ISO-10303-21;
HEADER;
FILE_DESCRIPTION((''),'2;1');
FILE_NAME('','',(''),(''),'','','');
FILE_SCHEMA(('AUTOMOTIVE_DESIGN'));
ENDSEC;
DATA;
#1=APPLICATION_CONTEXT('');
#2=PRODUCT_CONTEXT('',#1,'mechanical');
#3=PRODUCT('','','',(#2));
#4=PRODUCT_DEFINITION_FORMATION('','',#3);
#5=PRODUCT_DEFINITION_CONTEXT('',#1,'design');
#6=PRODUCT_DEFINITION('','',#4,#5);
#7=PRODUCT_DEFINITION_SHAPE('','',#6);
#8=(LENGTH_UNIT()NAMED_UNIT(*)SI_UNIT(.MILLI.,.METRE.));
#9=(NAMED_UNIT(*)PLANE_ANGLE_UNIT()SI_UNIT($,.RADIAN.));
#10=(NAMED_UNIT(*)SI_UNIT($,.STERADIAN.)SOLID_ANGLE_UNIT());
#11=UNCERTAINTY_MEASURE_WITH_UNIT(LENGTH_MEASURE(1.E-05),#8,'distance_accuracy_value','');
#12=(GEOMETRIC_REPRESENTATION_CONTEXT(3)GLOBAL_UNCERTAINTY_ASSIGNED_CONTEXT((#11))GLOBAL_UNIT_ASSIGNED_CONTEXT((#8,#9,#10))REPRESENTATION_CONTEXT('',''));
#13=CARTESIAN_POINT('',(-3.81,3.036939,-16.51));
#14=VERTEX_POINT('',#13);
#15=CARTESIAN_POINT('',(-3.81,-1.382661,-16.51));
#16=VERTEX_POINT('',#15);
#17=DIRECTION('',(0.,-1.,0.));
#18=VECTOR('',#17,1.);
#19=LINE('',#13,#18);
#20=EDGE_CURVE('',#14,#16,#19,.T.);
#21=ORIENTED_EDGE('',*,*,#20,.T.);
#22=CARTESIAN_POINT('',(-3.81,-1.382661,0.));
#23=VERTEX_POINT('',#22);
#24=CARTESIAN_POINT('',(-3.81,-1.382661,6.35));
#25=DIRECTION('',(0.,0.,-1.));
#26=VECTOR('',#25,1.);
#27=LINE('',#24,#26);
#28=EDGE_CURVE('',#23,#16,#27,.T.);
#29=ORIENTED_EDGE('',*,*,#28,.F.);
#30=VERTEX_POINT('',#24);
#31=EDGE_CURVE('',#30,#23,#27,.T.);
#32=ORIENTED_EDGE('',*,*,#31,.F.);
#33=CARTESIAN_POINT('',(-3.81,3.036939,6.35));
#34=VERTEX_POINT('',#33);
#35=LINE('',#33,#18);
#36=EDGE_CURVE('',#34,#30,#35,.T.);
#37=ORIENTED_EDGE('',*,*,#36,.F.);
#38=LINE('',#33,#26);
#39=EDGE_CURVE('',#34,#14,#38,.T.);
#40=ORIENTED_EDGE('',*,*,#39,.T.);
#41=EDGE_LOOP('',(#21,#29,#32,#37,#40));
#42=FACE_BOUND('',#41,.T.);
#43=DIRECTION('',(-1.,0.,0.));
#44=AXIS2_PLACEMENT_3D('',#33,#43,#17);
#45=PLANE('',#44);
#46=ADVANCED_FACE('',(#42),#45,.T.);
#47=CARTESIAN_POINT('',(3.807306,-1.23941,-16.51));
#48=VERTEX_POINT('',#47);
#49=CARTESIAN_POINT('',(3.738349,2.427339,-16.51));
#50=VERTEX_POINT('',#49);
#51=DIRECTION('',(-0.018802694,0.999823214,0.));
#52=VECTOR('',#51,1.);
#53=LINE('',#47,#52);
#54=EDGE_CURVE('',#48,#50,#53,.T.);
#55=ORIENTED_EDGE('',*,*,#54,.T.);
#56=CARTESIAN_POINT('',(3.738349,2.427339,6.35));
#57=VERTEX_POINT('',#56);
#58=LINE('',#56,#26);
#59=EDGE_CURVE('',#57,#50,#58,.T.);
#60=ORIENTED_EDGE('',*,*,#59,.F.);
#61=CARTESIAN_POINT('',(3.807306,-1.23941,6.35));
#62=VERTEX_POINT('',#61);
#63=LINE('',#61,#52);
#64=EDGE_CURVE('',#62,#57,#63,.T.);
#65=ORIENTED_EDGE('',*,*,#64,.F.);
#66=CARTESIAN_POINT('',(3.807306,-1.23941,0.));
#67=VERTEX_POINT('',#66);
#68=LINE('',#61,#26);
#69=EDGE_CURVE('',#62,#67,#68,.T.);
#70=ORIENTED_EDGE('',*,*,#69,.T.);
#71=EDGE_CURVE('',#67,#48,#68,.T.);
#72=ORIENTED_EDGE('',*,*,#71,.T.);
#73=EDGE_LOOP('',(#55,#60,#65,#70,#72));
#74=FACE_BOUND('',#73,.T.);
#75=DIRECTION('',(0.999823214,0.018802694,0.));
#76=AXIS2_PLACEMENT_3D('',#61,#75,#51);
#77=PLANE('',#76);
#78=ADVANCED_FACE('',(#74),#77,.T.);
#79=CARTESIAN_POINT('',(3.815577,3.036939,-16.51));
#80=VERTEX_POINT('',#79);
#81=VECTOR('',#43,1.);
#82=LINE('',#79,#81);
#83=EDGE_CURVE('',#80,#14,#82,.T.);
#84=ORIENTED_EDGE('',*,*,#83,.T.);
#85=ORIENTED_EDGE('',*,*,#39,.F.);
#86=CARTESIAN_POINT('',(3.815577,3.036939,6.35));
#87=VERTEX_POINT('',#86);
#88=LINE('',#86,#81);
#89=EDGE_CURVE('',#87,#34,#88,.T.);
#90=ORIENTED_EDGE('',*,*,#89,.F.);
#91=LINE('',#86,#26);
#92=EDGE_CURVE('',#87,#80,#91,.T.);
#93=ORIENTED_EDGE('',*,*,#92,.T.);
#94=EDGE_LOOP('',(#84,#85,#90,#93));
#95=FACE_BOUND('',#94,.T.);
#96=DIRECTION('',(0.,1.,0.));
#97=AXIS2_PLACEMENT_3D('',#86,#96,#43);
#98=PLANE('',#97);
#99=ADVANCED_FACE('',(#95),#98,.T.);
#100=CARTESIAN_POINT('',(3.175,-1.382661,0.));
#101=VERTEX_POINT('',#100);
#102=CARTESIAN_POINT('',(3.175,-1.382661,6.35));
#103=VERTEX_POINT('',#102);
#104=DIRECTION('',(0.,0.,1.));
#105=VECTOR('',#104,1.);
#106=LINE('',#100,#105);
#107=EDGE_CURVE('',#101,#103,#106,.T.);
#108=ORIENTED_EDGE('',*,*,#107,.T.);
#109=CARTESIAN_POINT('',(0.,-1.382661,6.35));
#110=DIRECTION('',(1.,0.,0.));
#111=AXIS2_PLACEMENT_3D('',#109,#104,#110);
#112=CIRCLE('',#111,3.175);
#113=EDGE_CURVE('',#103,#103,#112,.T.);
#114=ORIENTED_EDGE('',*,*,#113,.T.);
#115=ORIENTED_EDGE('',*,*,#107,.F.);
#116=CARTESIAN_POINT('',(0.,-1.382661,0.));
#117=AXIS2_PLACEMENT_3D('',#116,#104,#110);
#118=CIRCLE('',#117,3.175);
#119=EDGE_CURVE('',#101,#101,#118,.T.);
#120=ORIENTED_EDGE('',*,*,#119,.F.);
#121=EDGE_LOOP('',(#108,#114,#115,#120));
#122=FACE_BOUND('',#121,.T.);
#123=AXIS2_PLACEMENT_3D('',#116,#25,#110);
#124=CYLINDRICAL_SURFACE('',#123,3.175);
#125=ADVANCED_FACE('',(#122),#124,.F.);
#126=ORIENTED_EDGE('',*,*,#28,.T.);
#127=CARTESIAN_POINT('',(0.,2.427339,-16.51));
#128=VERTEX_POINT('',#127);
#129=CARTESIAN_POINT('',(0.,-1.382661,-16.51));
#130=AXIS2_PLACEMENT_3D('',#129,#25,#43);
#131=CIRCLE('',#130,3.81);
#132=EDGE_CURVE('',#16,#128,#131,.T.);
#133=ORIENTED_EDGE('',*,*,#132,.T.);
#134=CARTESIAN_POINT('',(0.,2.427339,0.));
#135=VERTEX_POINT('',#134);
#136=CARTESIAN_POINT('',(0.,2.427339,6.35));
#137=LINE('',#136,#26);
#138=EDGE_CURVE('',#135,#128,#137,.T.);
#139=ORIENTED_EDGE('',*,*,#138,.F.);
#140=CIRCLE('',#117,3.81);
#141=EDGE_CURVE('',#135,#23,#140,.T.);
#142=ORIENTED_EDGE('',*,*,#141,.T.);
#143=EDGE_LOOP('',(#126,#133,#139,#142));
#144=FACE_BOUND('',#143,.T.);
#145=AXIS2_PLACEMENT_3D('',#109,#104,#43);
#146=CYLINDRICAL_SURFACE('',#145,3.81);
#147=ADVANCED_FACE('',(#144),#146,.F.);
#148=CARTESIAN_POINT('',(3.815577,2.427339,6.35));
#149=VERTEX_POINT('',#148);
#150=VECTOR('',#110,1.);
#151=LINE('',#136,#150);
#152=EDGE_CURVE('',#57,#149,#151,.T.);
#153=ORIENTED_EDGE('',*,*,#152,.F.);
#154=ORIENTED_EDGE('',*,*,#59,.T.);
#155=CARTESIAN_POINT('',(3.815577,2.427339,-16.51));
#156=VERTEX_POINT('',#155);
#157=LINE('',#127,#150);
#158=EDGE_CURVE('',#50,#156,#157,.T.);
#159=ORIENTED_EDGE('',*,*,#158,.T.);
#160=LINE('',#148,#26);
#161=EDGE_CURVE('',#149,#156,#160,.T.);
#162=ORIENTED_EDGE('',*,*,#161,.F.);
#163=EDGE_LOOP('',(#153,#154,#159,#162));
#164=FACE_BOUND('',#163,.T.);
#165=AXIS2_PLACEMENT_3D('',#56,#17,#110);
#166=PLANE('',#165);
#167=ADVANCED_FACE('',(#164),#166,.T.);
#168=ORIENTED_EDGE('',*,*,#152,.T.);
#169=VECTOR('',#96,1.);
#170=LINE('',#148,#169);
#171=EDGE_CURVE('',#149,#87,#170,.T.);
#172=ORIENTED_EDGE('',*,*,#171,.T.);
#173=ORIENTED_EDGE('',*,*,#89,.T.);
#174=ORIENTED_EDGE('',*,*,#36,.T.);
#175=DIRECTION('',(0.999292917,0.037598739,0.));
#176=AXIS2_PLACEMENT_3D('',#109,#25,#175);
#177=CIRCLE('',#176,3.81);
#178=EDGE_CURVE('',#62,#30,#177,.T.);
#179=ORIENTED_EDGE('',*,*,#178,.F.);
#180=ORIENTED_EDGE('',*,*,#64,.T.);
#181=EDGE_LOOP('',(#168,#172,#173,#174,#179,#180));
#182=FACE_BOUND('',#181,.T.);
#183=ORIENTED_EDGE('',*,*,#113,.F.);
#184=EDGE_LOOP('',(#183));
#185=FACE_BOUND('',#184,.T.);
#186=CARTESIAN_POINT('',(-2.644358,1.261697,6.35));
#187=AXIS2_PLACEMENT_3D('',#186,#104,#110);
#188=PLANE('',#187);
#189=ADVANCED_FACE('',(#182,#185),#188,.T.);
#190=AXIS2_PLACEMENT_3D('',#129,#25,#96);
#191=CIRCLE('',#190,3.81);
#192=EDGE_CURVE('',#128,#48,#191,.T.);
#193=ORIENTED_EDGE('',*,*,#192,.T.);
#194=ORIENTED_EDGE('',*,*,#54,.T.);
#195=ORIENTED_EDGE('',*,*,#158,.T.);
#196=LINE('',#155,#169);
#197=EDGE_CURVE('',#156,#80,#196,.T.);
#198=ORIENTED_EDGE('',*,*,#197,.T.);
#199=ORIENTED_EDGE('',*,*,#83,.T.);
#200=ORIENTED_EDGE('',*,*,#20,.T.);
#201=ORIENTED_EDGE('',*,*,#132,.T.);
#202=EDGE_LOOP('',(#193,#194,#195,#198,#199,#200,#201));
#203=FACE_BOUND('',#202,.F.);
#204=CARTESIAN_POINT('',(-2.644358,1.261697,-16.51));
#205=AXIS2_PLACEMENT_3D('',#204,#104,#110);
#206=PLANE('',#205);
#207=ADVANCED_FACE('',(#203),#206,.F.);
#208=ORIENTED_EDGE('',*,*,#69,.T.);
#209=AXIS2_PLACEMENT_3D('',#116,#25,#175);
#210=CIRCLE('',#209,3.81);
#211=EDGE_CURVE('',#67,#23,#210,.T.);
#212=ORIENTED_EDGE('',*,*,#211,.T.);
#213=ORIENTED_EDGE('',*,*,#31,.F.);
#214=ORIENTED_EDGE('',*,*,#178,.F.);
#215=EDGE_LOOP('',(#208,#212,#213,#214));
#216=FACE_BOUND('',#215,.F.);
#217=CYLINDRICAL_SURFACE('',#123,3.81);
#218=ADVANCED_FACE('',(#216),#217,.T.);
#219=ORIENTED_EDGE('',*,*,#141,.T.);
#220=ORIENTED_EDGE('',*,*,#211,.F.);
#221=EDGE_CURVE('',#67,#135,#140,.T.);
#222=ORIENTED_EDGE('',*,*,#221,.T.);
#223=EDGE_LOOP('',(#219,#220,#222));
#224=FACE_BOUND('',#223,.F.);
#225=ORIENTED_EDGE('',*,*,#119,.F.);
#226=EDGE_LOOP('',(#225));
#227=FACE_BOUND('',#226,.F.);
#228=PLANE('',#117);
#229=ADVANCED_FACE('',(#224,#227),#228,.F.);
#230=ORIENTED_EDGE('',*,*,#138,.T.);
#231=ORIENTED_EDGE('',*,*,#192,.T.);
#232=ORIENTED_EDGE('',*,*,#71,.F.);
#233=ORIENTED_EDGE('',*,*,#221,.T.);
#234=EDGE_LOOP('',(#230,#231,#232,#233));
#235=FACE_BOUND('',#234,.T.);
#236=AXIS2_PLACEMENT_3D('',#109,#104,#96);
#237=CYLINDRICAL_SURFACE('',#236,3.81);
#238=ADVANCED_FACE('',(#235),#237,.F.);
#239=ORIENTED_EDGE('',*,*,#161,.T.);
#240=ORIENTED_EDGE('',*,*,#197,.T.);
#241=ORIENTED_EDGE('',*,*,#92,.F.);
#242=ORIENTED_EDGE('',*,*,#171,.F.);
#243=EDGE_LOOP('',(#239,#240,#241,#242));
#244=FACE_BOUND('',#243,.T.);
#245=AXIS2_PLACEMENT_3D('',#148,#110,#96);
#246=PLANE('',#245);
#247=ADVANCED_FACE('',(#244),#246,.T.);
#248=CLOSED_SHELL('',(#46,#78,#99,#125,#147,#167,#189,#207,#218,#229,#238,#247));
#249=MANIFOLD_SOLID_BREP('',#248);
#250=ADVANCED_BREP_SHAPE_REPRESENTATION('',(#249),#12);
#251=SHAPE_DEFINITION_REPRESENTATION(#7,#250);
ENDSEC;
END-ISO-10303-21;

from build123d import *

# Parameters (mm, degrees)
F0_R     = 3.81
F0_R_2   = 3.175
F1_DEPTH = 6.35
F3_DEPTH = 22.86


with BuildPart() as f1:
    # F0 (on Top) → F1 (new body)
    with BuildSketch(Plane.XY):
        with Locations((0, -1.3826612849)):
            Circle(F0_R)
        with Locations((0, -1.3826612849)):
            Circle(F0_R_2, mode=Mode.SUBTRACT)
    extrude(amount=F1_DEPTH)

    # F2 (on face) → F3 (join)
    with BuildSketch(Plane.XY.offset(6.35)):
        with BuildLine():
            Line((-3.81, 2.4273387151), (-3.81, -1.3826612849))
            ThreePointArc((-3.81, -1.3826612849), (-2.6940768363, 1.3114155514), (0, 2.4273387151))
            Line((0, 2.4273387151), (-3.81, 2.4273387151))
        make_face()
        Polygon((-3.81, 2.4273387151), (0, 2.4273387151), (3.7383490708, 2.4273387151), (3.8155771326, 2.4273387151), (3.8155771326, 3.0369387151), (-3.81, 3.0369387151), align=None)
        with BuildLine():
            Line((3.7383490708, 2.4273387151), (0, 2.4273387151))
            ThreePointArc((0, 2.4273387151), (2.6429446594, 1.3615951767), (3.8073060154, -1.2394100895))
            Line((3.8073060154, -1.2394100895), (3.7383490708, 2.4273387151))
        make_face()
    extrude(amount=-F3_DEPTH)


solid = f1.part
